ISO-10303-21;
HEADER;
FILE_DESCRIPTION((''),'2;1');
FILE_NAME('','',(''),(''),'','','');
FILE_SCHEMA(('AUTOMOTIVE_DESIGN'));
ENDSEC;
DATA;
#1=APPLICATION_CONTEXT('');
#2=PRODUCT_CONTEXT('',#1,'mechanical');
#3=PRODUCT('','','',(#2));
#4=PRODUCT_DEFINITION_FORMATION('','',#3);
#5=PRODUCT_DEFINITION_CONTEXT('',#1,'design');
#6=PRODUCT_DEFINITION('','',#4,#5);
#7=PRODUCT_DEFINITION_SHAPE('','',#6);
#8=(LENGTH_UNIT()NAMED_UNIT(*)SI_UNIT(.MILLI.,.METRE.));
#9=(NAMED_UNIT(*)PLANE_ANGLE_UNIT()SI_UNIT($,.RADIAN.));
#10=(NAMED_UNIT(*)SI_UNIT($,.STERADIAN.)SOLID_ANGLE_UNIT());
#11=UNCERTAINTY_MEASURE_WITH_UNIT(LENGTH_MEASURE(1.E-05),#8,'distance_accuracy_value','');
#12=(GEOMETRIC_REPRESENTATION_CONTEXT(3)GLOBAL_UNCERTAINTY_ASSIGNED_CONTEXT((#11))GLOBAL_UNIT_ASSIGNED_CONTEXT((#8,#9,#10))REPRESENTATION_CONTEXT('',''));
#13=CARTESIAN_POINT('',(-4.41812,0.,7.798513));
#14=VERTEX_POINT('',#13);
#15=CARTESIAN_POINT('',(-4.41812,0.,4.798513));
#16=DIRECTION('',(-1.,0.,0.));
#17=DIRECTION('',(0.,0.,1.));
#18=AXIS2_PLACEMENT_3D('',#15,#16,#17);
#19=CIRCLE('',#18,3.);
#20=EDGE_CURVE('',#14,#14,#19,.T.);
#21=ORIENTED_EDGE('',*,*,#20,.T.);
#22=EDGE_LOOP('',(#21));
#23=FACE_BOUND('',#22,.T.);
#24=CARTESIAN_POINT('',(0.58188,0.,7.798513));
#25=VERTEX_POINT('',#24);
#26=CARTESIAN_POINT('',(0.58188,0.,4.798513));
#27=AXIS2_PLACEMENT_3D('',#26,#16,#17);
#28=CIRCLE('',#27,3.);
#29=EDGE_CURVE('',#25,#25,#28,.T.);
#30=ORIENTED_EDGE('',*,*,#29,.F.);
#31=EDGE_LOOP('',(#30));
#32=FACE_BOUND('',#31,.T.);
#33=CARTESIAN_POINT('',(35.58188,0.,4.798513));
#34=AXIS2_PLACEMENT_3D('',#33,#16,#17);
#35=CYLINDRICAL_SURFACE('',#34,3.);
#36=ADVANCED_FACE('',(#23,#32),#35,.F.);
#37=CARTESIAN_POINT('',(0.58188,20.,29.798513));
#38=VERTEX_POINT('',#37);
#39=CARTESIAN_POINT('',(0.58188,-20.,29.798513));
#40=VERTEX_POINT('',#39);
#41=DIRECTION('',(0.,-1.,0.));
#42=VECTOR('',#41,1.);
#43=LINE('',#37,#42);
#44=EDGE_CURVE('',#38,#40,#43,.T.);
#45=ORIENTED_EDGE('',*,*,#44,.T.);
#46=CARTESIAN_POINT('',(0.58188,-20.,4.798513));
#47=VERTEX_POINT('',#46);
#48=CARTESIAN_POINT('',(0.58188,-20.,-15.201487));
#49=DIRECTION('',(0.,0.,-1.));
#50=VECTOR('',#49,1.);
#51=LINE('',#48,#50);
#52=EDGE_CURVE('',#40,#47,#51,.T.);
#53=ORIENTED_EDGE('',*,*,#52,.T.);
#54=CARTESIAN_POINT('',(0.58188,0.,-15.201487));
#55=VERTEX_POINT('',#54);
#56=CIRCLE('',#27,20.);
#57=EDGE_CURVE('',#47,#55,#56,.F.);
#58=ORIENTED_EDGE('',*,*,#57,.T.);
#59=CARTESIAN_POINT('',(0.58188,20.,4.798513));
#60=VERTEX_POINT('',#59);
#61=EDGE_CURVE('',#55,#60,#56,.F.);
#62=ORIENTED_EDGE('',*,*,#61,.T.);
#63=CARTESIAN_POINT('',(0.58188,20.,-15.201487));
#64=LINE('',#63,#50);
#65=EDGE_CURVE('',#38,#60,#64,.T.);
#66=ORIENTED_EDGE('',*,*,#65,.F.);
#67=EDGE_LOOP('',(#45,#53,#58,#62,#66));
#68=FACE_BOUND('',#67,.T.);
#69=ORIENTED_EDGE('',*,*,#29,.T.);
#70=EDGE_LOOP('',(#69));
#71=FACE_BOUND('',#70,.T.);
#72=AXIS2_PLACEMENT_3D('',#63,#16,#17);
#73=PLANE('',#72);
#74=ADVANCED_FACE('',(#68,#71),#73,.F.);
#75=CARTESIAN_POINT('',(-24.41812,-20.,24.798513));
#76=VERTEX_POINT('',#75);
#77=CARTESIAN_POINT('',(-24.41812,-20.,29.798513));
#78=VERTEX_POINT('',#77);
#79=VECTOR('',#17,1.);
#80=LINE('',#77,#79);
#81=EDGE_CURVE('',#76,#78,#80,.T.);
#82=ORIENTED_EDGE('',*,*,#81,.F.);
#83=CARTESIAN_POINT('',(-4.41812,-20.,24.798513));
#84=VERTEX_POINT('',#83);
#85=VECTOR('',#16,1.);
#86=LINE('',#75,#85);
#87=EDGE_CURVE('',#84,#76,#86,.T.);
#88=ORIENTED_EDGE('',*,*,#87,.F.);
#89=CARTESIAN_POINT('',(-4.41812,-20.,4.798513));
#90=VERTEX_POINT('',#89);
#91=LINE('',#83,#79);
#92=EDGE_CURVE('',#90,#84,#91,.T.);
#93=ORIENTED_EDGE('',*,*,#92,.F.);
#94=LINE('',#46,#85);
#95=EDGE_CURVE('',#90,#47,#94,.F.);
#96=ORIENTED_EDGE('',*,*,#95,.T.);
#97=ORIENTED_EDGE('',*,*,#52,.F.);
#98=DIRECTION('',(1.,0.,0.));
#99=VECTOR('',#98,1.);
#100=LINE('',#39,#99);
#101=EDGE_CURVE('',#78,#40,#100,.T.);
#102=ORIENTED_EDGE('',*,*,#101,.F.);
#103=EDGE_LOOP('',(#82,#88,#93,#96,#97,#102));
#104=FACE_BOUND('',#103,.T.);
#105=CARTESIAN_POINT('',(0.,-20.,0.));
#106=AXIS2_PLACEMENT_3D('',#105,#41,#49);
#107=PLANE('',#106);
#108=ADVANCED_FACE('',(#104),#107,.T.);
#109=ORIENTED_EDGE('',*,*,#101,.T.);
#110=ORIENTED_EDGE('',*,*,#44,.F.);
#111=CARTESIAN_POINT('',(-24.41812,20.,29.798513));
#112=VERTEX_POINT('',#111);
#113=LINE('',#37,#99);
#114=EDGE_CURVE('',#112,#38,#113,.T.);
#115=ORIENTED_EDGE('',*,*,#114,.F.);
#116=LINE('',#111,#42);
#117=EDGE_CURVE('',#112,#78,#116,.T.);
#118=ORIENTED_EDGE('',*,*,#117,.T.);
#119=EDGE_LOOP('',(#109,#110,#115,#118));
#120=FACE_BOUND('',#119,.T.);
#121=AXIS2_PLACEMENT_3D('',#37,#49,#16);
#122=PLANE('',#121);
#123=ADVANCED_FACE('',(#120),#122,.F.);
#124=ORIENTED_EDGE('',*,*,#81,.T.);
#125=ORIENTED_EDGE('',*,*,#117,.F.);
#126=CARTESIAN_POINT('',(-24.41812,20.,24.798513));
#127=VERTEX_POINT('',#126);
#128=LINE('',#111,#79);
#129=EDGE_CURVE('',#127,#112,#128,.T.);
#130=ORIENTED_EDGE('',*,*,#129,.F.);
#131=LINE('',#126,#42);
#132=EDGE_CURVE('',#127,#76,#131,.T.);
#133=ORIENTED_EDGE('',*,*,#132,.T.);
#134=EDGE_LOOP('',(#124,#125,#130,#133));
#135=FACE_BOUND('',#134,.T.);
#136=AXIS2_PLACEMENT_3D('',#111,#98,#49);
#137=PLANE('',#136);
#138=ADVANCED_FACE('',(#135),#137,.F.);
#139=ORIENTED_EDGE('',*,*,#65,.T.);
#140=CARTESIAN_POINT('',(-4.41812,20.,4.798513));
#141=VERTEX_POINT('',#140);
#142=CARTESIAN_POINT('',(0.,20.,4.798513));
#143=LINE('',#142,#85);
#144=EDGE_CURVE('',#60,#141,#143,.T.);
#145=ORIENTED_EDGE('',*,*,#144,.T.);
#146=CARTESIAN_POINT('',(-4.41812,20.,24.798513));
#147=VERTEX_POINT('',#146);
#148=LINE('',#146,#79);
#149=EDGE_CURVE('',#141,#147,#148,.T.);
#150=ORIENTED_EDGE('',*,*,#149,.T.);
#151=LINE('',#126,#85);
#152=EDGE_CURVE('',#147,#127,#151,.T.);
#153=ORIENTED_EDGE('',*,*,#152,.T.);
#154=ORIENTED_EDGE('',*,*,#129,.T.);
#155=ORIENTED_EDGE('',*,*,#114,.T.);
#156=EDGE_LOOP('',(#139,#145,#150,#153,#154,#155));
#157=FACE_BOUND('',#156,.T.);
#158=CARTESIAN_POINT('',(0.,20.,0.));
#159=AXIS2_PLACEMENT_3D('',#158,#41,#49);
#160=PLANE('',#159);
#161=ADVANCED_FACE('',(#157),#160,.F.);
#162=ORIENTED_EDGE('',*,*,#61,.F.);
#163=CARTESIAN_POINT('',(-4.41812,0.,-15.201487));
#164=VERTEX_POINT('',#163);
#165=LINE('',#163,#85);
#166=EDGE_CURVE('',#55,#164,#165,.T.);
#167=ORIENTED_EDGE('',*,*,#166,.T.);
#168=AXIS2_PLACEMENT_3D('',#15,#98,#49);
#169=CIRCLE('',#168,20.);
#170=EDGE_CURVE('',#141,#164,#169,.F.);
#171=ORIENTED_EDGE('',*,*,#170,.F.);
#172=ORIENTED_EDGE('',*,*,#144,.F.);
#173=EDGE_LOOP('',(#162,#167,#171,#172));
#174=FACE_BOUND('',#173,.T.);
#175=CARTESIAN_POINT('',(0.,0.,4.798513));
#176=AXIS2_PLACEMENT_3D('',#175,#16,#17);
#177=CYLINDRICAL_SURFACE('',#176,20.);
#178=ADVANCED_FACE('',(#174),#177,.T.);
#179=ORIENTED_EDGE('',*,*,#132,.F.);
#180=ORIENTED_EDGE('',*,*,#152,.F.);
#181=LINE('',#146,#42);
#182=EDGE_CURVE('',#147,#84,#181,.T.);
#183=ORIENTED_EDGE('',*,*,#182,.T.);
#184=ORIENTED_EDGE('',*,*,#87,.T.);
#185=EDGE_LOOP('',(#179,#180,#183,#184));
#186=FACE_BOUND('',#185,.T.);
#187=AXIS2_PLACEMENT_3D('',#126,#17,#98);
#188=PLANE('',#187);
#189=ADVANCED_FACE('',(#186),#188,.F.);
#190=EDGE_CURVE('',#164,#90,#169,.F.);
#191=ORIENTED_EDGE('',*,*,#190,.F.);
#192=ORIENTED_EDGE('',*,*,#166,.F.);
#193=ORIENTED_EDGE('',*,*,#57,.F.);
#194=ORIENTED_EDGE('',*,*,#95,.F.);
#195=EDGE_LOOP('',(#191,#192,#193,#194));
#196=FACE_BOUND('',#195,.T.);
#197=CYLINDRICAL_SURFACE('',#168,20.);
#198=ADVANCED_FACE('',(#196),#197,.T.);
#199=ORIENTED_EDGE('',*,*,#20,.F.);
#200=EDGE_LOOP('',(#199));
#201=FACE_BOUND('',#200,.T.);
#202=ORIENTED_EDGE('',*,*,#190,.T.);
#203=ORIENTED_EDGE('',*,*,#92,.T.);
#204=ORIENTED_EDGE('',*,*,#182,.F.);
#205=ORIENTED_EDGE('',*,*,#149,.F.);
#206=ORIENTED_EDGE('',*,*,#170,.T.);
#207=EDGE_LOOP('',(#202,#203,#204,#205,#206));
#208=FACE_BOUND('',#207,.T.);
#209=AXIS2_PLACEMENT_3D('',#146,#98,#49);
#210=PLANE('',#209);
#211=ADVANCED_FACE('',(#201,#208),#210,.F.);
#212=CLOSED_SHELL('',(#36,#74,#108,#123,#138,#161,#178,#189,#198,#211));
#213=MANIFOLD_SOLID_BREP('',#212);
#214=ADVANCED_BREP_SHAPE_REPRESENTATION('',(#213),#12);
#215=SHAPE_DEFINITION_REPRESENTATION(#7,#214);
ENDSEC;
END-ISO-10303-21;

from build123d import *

# Parameters (mm, degrees)
BOSS_EXTRUDE1_DEPTH = 20
FILLET1_R           = 20
FILLET2_R           = 20
SKETCH2_R           = 3
CUT_EXTRUDE2_DEPTH  = 40


with BuildPart() as part:
    # Sketch1 → Boss-Extrude1 (new, symmetric)
    with BuildSketch(Plane(origin=(0, 0, 0), x_dir=(1, 0, 0), z_dir=(0, 1, 0))):
        Polygon((-4.418120101, 15.201487277), (0.581879899, 15.201487277), (0.581879899, -29.798512723), (-24.418120101, -29.798512723), (-24.418120101, -24.798512723), (-4.418120101, -24.798512723), align=None)
    extrude(amount=BOSS_EXTRUDE1_DEPTH, both=True)

    # Fillet1
    fillet1_edges = [part.edges().sort_by_distance(p)[0] for p in [
        (-1.918120101, -20, -15.201487277),
    ]]
    fillet(fillet1_edges, radius=FILLET1_R)

    # Fillet2
    fillet2_edges = [part.edges().sort_by_distance(p)[0] for p in [
        (-1.918120101, 20, -15.201487277),
    ]]
    fillet(fillet2_edges, radius=FILLET2_R - 0.0001)  # a hair under: the kernel refuses the full size

    # Sketch2 → Cut-Extrude2 (cut)
    with BuildSketch(Plane.ZY.offset(4.418120101)):
        with Locations((4.798512723, 0)):
            Circle(SKETCH2_R)
    extrude(amount=-CUT_EXTRUDE2_DEPTH, mode=Mode.SUBTRACT)


solid = part.part
